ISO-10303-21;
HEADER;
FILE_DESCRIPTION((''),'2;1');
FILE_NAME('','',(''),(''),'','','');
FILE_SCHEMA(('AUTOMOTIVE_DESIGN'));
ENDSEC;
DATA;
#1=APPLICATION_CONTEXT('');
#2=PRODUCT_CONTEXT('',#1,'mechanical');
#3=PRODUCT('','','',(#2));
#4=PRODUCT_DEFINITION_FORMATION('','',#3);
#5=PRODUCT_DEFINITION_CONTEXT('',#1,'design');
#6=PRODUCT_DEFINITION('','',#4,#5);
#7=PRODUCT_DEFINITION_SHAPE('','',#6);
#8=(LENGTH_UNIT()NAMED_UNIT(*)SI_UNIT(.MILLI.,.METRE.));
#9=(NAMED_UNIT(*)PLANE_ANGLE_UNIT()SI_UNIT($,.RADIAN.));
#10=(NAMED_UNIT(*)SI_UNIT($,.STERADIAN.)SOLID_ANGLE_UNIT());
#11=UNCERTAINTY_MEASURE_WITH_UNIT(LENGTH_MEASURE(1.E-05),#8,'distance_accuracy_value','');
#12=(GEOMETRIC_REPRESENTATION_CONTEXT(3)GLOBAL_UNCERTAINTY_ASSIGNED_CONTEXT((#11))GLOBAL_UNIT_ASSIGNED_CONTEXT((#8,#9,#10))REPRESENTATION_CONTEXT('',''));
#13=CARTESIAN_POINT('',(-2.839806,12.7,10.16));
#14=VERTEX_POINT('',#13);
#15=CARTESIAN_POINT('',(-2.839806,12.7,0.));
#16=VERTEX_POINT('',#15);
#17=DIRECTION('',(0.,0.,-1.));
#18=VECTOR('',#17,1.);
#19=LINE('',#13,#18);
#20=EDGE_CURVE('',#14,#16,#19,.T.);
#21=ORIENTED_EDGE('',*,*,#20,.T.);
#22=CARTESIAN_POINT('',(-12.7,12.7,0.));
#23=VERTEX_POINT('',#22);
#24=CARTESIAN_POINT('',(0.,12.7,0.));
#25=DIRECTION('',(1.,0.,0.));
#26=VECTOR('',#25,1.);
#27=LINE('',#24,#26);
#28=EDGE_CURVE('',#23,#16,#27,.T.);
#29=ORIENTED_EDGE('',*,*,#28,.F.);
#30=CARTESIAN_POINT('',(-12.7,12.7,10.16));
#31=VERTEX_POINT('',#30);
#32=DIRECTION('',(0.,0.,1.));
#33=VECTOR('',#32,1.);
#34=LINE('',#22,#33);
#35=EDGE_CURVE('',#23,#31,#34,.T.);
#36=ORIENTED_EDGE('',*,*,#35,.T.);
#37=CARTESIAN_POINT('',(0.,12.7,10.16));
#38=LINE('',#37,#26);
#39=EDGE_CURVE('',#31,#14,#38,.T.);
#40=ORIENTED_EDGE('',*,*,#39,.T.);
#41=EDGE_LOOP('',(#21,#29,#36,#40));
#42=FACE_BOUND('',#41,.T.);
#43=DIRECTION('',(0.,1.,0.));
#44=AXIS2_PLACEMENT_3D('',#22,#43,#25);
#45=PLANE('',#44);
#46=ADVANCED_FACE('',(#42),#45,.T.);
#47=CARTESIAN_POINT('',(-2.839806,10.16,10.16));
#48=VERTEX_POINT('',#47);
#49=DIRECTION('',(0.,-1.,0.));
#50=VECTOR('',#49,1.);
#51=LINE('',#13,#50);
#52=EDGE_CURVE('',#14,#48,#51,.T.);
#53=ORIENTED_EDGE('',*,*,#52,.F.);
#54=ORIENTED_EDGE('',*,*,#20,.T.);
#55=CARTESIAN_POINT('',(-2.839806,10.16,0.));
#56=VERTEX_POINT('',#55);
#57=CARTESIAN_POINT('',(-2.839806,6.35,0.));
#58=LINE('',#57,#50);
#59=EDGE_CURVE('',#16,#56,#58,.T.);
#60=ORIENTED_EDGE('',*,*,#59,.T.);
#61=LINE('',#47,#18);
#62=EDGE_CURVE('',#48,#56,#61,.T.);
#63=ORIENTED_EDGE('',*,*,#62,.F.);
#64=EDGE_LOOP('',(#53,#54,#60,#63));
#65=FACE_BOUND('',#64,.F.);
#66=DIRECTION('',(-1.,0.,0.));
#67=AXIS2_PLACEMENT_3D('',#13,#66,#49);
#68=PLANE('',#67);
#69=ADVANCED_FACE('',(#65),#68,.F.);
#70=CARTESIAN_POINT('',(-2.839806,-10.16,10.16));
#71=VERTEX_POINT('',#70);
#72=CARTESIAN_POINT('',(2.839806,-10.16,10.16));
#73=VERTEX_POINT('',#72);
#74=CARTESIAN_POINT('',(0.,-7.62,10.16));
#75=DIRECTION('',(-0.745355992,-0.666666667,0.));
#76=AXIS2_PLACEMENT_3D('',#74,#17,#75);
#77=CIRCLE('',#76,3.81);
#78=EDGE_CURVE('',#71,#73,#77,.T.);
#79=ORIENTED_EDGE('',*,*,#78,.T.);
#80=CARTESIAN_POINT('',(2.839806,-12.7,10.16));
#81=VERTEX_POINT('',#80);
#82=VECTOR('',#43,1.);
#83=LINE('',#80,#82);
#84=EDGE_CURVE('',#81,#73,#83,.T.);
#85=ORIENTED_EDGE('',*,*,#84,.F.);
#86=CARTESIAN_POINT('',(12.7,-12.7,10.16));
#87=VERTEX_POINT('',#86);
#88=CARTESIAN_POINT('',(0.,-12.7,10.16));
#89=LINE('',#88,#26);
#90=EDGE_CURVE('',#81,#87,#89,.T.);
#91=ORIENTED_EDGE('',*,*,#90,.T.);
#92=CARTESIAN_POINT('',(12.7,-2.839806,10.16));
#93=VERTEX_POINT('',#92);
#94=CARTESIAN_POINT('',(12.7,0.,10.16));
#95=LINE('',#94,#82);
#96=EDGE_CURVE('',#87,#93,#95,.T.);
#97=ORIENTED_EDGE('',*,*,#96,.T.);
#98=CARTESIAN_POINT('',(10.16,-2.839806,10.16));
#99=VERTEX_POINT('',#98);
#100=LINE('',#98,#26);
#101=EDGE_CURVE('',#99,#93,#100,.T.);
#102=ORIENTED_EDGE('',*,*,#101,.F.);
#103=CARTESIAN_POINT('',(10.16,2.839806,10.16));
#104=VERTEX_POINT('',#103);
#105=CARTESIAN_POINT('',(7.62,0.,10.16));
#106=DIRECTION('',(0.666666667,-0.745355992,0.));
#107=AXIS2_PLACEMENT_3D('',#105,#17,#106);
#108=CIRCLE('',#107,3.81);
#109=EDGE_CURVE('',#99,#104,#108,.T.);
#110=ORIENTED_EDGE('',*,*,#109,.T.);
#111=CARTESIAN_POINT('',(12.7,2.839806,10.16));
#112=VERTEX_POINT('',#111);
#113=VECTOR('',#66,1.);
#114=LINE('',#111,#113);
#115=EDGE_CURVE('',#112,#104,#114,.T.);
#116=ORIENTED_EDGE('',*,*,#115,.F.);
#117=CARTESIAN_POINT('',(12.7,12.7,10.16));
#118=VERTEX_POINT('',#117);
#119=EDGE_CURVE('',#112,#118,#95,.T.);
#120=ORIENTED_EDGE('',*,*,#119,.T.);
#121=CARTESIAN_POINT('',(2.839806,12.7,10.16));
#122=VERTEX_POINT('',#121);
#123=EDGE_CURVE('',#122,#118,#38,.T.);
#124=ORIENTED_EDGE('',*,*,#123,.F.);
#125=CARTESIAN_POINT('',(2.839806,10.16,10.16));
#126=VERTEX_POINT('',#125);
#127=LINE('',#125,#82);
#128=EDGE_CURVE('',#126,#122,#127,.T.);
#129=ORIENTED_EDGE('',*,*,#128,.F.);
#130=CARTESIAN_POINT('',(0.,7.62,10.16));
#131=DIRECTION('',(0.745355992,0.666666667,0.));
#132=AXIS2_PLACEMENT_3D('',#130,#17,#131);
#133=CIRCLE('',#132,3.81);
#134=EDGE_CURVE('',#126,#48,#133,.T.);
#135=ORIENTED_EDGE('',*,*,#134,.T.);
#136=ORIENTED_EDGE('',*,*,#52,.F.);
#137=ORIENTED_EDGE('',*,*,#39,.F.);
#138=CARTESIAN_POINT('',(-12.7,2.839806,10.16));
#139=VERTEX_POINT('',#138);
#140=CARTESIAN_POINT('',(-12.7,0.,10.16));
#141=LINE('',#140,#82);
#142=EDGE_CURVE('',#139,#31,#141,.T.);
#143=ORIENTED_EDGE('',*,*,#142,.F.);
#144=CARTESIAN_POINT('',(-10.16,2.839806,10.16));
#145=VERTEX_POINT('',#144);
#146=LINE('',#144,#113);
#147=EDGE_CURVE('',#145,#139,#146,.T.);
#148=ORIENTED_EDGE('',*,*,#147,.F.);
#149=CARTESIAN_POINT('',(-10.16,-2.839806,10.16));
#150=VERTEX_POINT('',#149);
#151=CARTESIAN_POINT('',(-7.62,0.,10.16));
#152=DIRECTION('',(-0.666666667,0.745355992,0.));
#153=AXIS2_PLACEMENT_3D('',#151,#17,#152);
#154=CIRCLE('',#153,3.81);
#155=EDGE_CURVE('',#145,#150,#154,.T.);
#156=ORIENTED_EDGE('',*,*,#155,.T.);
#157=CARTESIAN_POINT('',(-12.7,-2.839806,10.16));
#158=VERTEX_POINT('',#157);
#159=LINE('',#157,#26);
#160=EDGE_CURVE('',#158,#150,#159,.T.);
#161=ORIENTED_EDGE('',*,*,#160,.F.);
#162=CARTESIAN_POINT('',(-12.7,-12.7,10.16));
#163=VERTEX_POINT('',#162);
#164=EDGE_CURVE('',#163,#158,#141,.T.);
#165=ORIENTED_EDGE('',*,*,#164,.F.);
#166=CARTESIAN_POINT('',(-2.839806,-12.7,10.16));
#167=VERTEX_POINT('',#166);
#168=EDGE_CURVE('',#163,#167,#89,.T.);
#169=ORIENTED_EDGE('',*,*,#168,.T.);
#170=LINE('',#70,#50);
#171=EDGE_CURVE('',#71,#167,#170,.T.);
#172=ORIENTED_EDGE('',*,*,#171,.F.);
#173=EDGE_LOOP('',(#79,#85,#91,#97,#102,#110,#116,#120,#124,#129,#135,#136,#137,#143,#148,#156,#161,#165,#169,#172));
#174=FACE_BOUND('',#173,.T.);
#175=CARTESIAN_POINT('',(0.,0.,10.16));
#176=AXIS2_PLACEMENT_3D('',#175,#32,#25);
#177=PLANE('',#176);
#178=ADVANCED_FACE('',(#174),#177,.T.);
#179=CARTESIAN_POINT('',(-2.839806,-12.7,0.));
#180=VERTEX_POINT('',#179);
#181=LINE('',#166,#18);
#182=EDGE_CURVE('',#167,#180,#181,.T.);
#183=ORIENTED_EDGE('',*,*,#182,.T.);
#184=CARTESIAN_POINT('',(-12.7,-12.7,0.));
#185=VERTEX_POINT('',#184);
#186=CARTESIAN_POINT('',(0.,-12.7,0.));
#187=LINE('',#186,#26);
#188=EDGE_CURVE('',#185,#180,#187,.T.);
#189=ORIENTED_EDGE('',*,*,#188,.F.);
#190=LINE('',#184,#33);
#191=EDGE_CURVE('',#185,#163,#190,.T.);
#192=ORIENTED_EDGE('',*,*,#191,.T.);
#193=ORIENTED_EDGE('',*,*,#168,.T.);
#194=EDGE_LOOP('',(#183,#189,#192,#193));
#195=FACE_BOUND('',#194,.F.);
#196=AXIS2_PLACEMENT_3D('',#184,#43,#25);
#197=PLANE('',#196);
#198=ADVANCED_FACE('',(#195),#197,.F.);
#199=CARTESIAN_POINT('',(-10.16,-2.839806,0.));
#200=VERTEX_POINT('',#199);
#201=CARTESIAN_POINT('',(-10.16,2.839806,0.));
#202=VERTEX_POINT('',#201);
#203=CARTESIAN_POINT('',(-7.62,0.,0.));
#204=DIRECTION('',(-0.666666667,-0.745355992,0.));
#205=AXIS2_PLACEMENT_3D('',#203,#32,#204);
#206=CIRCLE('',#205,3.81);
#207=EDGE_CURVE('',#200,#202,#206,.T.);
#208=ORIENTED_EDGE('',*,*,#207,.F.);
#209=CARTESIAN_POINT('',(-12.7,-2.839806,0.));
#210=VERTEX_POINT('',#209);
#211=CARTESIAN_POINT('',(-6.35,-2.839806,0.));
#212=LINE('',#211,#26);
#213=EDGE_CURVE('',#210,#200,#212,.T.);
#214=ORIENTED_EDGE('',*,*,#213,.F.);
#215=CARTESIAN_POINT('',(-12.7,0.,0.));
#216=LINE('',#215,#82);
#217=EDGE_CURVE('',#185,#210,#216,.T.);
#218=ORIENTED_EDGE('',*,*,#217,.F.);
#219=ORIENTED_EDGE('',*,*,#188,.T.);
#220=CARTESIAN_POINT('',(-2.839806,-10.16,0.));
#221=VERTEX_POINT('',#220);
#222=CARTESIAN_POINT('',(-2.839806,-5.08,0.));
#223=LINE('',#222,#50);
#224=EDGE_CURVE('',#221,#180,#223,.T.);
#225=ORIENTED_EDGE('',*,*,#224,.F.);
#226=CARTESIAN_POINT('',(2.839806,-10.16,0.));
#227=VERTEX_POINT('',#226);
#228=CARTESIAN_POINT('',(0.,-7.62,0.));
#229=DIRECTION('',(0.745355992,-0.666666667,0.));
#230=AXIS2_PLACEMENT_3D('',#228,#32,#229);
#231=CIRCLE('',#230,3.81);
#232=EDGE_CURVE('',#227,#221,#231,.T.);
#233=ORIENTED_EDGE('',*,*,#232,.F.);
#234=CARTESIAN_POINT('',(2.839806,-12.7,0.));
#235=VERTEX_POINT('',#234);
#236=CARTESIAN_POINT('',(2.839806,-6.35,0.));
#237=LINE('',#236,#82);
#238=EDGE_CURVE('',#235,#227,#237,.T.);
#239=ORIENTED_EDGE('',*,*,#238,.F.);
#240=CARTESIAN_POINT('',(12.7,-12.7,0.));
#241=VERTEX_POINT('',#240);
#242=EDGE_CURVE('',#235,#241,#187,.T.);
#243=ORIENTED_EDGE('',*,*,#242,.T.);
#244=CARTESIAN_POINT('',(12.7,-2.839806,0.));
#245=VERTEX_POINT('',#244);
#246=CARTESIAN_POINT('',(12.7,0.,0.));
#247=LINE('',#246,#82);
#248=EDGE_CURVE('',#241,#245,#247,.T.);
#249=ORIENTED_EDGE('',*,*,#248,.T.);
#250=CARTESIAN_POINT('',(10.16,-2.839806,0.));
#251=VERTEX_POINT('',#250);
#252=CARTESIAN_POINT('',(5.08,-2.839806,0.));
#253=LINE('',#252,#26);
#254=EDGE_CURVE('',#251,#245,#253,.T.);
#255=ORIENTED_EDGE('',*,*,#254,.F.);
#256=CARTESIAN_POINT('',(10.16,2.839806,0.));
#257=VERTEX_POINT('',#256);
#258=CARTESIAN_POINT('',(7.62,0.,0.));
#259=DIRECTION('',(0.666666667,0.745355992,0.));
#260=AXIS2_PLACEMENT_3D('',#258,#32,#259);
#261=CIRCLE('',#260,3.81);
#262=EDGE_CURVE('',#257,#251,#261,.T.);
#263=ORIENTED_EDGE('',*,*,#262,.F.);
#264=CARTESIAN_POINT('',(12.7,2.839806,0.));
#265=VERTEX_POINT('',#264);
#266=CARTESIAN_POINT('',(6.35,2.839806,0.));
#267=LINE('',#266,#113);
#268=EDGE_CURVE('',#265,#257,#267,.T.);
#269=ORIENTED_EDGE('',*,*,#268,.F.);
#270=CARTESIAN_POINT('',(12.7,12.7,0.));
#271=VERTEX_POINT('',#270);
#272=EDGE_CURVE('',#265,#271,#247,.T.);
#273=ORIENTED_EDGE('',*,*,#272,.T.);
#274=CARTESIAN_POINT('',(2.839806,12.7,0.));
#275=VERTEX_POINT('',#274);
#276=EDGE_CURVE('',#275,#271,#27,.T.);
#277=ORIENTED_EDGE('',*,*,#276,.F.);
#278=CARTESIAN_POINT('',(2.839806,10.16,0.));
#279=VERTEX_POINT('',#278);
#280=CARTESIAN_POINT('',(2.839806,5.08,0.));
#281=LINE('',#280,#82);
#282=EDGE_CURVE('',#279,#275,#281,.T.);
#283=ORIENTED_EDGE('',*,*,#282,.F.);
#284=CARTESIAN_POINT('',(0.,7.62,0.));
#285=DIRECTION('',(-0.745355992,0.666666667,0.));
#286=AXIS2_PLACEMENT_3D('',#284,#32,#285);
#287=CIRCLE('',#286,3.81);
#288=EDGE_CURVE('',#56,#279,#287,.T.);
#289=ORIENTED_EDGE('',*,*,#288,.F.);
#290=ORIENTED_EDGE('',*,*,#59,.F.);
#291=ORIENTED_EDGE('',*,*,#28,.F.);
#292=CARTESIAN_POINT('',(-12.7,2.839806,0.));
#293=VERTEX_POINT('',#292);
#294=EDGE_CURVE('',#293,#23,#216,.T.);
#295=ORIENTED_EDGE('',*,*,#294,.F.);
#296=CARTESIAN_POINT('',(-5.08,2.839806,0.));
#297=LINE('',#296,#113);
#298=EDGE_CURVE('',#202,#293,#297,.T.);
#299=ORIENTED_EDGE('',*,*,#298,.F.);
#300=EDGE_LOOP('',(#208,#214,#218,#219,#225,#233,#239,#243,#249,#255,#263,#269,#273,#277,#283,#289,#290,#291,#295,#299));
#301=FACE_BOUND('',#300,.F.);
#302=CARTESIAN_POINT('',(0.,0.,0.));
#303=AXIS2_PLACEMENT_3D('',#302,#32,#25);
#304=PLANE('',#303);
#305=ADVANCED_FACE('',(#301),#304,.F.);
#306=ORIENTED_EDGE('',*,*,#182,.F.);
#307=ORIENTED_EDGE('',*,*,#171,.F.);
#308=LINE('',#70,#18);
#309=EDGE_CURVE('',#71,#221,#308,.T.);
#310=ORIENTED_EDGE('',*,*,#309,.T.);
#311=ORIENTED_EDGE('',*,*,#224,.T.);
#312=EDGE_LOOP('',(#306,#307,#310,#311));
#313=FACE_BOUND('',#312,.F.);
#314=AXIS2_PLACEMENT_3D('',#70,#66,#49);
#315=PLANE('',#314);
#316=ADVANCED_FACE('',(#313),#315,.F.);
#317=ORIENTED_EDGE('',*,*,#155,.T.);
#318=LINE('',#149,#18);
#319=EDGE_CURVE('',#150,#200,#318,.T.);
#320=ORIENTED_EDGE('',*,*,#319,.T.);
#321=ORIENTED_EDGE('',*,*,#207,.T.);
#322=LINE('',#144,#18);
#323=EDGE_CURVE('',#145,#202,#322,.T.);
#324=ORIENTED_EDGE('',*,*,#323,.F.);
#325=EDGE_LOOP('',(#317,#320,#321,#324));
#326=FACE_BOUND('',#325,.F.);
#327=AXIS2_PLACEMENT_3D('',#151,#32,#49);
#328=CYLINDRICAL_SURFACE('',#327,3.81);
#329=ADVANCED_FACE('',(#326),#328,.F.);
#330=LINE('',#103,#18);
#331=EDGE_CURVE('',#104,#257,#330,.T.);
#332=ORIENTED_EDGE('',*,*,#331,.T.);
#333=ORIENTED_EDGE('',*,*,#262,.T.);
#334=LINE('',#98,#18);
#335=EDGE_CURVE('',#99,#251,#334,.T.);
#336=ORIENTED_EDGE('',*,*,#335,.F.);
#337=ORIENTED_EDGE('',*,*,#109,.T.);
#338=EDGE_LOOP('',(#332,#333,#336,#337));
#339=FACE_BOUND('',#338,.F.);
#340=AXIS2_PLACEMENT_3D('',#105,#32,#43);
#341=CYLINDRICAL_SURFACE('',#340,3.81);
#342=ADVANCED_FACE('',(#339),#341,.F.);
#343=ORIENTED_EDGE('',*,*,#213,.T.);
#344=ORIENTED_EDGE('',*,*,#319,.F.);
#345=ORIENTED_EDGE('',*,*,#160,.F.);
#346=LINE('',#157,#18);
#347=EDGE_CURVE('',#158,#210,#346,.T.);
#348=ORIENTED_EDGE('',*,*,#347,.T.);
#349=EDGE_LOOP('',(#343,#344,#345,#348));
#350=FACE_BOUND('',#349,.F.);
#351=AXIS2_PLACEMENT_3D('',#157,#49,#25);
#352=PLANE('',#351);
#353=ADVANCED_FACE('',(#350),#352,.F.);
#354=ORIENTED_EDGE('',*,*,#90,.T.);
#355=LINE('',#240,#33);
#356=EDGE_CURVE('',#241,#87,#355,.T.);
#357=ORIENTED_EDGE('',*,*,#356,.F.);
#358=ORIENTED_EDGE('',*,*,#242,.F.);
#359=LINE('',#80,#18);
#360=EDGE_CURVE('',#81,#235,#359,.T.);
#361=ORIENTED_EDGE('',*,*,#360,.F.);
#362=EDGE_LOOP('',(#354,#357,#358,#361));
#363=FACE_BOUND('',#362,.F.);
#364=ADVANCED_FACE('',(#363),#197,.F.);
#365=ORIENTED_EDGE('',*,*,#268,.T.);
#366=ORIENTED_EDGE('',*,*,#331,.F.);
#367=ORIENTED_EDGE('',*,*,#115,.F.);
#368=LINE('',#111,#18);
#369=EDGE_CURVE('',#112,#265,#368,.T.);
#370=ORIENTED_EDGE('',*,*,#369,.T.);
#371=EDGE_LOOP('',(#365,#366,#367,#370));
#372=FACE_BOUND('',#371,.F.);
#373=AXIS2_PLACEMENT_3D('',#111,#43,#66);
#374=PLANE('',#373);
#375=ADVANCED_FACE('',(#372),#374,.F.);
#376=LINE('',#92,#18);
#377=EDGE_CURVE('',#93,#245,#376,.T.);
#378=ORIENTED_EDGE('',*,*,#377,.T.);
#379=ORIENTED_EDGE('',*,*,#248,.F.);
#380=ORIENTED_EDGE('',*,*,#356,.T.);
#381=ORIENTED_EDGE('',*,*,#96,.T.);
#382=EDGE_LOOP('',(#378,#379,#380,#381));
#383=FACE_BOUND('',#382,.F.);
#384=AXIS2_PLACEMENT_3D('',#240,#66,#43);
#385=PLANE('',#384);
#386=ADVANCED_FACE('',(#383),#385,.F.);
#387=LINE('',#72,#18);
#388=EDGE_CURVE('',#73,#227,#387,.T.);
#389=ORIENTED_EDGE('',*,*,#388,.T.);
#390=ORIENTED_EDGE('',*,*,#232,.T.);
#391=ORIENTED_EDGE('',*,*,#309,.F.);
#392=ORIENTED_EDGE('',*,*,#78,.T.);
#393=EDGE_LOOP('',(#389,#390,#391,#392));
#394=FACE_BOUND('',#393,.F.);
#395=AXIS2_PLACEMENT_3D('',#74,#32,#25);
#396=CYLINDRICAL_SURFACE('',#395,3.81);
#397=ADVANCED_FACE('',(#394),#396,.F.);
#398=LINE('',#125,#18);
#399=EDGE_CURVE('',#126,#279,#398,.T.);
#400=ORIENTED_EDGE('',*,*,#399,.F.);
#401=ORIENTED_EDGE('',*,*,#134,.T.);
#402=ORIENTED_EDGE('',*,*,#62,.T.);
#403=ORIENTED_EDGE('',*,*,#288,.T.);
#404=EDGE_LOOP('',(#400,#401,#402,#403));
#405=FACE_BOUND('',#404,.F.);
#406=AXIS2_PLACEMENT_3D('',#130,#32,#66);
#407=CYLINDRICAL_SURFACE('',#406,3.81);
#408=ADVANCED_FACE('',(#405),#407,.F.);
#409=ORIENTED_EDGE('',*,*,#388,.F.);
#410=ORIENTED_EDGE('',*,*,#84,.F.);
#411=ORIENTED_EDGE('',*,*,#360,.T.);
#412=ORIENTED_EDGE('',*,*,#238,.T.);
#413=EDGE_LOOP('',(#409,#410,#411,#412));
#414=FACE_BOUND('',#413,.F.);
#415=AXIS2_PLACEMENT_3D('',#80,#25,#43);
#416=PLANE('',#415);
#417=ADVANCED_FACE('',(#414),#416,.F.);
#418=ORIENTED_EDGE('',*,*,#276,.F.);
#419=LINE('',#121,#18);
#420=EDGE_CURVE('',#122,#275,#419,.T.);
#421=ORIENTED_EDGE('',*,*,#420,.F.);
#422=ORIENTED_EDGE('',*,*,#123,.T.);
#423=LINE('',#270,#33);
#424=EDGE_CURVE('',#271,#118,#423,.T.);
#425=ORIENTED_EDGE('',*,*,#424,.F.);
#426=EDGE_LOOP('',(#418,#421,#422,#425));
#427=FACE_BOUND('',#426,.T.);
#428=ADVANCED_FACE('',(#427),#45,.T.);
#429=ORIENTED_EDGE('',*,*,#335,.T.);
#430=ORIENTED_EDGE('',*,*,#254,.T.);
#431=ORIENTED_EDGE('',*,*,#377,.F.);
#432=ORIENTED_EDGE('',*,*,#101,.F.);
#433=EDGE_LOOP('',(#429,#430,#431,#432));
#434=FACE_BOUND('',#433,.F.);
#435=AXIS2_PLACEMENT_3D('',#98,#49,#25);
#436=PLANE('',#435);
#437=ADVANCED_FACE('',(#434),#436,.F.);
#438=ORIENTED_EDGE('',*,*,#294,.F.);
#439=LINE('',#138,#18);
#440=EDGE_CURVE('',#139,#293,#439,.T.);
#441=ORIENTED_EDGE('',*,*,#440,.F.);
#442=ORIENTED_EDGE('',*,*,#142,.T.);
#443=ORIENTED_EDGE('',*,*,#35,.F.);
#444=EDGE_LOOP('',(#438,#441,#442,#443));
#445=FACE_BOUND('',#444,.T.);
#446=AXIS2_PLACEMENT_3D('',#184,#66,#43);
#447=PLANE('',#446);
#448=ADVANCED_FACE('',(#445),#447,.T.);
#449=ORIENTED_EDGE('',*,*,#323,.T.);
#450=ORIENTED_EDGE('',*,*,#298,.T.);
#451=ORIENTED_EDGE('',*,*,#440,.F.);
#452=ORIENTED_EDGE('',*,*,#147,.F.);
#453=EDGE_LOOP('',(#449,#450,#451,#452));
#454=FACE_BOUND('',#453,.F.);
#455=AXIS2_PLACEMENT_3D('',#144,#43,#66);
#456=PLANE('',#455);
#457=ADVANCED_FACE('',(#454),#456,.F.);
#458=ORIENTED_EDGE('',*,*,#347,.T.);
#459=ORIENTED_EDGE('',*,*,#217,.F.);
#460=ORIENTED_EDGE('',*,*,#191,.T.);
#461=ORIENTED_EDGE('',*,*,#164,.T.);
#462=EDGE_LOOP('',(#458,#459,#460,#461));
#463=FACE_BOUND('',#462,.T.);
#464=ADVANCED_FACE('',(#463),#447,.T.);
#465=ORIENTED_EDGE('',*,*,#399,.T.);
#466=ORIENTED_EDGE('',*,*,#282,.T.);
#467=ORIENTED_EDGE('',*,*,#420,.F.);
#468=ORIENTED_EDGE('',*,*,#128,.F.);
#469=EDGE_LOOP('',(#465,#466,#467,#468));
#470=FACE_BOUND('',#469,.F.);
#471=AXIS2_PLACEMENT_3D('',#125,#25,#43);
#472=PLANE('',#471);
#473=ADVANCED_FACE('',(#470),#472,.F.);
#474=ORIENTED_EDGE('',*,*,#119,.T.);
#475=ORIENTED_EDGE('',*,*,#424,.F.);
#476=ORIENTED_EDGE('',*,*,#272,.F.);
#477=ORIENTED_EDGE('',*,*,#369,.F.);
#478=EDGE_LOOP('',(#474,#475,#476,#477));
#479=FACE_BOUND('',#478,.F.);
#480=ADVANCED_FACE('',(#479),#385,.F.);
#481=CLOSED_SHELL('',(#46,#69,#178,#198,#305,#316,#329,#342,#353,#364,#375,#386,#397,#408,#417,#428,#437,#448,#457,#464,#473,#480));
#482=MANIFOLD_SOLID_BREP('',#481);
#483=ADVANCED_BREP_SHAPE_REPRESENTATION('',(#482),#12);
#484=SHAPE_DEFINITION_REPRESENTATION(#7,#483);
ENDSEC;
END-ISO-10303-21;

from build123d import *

# Parameters (mm, degrees)
F0_W            = 25.4
F0_H            = 25.4
F1_DEPTH        = 10.16
F2_R            = 3.81
F3_DEPTH        = 25.4
F3_COPIES_COUNT = 4
F5_DEPTH        = 25.4
F5_COPIES_COUNT = 4


# Not quite as in the source:
# - a pattern or mirror of a feature is missing from the dataset's text; its kind, count and spacing are read off the source's solid


with BuildPart() as f1:
    # F0 (on Top) → F1 (new body)
    with BuildSketch(Plane.XY):
        Rectangle(F0_W, F0_H)
    extrude(amount=F1_DEPTH)

    # F2 (on face) → F3 (cut)
    with BuildSketch(Plane.XY.offset(10.16)):
        with Locations((0, -7.62)):
            Circle(F2_R)
    f3 = extrude(amount=-F3_DEPTH, mode=Mode.SUBTRACT)

    # F3_copies: F3 ×4 about axis
    f3_copies_axis = Axis((0, 0, 0), (0, 0, 1))
    for i in range(1, F3_COPIES_COUNT):
        add(f3.rotate(f3_copies_axis, i * 360 / F3_COPIES_COUNT), mode=Mode.SUBTRACT)

    # F4 (on face) → F5 (cut)
    with BuildSketch(Plane.XY.offset(10.16)):
        with BuildLine():
            Line((-2.8398063314, -10.16), (-2.8398063314, -12.7))
            Line((-2.8398063314, -12.7), (2.8398063314, -12.7))
            Line((2.8398063314, -12.7), (2.8398063314, -10.16))
            ThreePointArc((2.8398063314, -10.16), (0, -11.43), (-2.8398063314, -10.16))
        make_face()
    f5 = extrude(amount=-F5_DEPTH, mode=Mode.SUBTRACT)

    # F5_copies: F5 ×4 about axis
    f5_copies_axis = Axis((0, 0, 0), (0, 0, 1))
    for i in range(1, F5_COPIES_COUNT):
        add(f5.rotate(f5_copies_axis, i * 360 / F5_COPIES_COUNT), mode=Mode.SUBTRACT)


solid = f1.part
